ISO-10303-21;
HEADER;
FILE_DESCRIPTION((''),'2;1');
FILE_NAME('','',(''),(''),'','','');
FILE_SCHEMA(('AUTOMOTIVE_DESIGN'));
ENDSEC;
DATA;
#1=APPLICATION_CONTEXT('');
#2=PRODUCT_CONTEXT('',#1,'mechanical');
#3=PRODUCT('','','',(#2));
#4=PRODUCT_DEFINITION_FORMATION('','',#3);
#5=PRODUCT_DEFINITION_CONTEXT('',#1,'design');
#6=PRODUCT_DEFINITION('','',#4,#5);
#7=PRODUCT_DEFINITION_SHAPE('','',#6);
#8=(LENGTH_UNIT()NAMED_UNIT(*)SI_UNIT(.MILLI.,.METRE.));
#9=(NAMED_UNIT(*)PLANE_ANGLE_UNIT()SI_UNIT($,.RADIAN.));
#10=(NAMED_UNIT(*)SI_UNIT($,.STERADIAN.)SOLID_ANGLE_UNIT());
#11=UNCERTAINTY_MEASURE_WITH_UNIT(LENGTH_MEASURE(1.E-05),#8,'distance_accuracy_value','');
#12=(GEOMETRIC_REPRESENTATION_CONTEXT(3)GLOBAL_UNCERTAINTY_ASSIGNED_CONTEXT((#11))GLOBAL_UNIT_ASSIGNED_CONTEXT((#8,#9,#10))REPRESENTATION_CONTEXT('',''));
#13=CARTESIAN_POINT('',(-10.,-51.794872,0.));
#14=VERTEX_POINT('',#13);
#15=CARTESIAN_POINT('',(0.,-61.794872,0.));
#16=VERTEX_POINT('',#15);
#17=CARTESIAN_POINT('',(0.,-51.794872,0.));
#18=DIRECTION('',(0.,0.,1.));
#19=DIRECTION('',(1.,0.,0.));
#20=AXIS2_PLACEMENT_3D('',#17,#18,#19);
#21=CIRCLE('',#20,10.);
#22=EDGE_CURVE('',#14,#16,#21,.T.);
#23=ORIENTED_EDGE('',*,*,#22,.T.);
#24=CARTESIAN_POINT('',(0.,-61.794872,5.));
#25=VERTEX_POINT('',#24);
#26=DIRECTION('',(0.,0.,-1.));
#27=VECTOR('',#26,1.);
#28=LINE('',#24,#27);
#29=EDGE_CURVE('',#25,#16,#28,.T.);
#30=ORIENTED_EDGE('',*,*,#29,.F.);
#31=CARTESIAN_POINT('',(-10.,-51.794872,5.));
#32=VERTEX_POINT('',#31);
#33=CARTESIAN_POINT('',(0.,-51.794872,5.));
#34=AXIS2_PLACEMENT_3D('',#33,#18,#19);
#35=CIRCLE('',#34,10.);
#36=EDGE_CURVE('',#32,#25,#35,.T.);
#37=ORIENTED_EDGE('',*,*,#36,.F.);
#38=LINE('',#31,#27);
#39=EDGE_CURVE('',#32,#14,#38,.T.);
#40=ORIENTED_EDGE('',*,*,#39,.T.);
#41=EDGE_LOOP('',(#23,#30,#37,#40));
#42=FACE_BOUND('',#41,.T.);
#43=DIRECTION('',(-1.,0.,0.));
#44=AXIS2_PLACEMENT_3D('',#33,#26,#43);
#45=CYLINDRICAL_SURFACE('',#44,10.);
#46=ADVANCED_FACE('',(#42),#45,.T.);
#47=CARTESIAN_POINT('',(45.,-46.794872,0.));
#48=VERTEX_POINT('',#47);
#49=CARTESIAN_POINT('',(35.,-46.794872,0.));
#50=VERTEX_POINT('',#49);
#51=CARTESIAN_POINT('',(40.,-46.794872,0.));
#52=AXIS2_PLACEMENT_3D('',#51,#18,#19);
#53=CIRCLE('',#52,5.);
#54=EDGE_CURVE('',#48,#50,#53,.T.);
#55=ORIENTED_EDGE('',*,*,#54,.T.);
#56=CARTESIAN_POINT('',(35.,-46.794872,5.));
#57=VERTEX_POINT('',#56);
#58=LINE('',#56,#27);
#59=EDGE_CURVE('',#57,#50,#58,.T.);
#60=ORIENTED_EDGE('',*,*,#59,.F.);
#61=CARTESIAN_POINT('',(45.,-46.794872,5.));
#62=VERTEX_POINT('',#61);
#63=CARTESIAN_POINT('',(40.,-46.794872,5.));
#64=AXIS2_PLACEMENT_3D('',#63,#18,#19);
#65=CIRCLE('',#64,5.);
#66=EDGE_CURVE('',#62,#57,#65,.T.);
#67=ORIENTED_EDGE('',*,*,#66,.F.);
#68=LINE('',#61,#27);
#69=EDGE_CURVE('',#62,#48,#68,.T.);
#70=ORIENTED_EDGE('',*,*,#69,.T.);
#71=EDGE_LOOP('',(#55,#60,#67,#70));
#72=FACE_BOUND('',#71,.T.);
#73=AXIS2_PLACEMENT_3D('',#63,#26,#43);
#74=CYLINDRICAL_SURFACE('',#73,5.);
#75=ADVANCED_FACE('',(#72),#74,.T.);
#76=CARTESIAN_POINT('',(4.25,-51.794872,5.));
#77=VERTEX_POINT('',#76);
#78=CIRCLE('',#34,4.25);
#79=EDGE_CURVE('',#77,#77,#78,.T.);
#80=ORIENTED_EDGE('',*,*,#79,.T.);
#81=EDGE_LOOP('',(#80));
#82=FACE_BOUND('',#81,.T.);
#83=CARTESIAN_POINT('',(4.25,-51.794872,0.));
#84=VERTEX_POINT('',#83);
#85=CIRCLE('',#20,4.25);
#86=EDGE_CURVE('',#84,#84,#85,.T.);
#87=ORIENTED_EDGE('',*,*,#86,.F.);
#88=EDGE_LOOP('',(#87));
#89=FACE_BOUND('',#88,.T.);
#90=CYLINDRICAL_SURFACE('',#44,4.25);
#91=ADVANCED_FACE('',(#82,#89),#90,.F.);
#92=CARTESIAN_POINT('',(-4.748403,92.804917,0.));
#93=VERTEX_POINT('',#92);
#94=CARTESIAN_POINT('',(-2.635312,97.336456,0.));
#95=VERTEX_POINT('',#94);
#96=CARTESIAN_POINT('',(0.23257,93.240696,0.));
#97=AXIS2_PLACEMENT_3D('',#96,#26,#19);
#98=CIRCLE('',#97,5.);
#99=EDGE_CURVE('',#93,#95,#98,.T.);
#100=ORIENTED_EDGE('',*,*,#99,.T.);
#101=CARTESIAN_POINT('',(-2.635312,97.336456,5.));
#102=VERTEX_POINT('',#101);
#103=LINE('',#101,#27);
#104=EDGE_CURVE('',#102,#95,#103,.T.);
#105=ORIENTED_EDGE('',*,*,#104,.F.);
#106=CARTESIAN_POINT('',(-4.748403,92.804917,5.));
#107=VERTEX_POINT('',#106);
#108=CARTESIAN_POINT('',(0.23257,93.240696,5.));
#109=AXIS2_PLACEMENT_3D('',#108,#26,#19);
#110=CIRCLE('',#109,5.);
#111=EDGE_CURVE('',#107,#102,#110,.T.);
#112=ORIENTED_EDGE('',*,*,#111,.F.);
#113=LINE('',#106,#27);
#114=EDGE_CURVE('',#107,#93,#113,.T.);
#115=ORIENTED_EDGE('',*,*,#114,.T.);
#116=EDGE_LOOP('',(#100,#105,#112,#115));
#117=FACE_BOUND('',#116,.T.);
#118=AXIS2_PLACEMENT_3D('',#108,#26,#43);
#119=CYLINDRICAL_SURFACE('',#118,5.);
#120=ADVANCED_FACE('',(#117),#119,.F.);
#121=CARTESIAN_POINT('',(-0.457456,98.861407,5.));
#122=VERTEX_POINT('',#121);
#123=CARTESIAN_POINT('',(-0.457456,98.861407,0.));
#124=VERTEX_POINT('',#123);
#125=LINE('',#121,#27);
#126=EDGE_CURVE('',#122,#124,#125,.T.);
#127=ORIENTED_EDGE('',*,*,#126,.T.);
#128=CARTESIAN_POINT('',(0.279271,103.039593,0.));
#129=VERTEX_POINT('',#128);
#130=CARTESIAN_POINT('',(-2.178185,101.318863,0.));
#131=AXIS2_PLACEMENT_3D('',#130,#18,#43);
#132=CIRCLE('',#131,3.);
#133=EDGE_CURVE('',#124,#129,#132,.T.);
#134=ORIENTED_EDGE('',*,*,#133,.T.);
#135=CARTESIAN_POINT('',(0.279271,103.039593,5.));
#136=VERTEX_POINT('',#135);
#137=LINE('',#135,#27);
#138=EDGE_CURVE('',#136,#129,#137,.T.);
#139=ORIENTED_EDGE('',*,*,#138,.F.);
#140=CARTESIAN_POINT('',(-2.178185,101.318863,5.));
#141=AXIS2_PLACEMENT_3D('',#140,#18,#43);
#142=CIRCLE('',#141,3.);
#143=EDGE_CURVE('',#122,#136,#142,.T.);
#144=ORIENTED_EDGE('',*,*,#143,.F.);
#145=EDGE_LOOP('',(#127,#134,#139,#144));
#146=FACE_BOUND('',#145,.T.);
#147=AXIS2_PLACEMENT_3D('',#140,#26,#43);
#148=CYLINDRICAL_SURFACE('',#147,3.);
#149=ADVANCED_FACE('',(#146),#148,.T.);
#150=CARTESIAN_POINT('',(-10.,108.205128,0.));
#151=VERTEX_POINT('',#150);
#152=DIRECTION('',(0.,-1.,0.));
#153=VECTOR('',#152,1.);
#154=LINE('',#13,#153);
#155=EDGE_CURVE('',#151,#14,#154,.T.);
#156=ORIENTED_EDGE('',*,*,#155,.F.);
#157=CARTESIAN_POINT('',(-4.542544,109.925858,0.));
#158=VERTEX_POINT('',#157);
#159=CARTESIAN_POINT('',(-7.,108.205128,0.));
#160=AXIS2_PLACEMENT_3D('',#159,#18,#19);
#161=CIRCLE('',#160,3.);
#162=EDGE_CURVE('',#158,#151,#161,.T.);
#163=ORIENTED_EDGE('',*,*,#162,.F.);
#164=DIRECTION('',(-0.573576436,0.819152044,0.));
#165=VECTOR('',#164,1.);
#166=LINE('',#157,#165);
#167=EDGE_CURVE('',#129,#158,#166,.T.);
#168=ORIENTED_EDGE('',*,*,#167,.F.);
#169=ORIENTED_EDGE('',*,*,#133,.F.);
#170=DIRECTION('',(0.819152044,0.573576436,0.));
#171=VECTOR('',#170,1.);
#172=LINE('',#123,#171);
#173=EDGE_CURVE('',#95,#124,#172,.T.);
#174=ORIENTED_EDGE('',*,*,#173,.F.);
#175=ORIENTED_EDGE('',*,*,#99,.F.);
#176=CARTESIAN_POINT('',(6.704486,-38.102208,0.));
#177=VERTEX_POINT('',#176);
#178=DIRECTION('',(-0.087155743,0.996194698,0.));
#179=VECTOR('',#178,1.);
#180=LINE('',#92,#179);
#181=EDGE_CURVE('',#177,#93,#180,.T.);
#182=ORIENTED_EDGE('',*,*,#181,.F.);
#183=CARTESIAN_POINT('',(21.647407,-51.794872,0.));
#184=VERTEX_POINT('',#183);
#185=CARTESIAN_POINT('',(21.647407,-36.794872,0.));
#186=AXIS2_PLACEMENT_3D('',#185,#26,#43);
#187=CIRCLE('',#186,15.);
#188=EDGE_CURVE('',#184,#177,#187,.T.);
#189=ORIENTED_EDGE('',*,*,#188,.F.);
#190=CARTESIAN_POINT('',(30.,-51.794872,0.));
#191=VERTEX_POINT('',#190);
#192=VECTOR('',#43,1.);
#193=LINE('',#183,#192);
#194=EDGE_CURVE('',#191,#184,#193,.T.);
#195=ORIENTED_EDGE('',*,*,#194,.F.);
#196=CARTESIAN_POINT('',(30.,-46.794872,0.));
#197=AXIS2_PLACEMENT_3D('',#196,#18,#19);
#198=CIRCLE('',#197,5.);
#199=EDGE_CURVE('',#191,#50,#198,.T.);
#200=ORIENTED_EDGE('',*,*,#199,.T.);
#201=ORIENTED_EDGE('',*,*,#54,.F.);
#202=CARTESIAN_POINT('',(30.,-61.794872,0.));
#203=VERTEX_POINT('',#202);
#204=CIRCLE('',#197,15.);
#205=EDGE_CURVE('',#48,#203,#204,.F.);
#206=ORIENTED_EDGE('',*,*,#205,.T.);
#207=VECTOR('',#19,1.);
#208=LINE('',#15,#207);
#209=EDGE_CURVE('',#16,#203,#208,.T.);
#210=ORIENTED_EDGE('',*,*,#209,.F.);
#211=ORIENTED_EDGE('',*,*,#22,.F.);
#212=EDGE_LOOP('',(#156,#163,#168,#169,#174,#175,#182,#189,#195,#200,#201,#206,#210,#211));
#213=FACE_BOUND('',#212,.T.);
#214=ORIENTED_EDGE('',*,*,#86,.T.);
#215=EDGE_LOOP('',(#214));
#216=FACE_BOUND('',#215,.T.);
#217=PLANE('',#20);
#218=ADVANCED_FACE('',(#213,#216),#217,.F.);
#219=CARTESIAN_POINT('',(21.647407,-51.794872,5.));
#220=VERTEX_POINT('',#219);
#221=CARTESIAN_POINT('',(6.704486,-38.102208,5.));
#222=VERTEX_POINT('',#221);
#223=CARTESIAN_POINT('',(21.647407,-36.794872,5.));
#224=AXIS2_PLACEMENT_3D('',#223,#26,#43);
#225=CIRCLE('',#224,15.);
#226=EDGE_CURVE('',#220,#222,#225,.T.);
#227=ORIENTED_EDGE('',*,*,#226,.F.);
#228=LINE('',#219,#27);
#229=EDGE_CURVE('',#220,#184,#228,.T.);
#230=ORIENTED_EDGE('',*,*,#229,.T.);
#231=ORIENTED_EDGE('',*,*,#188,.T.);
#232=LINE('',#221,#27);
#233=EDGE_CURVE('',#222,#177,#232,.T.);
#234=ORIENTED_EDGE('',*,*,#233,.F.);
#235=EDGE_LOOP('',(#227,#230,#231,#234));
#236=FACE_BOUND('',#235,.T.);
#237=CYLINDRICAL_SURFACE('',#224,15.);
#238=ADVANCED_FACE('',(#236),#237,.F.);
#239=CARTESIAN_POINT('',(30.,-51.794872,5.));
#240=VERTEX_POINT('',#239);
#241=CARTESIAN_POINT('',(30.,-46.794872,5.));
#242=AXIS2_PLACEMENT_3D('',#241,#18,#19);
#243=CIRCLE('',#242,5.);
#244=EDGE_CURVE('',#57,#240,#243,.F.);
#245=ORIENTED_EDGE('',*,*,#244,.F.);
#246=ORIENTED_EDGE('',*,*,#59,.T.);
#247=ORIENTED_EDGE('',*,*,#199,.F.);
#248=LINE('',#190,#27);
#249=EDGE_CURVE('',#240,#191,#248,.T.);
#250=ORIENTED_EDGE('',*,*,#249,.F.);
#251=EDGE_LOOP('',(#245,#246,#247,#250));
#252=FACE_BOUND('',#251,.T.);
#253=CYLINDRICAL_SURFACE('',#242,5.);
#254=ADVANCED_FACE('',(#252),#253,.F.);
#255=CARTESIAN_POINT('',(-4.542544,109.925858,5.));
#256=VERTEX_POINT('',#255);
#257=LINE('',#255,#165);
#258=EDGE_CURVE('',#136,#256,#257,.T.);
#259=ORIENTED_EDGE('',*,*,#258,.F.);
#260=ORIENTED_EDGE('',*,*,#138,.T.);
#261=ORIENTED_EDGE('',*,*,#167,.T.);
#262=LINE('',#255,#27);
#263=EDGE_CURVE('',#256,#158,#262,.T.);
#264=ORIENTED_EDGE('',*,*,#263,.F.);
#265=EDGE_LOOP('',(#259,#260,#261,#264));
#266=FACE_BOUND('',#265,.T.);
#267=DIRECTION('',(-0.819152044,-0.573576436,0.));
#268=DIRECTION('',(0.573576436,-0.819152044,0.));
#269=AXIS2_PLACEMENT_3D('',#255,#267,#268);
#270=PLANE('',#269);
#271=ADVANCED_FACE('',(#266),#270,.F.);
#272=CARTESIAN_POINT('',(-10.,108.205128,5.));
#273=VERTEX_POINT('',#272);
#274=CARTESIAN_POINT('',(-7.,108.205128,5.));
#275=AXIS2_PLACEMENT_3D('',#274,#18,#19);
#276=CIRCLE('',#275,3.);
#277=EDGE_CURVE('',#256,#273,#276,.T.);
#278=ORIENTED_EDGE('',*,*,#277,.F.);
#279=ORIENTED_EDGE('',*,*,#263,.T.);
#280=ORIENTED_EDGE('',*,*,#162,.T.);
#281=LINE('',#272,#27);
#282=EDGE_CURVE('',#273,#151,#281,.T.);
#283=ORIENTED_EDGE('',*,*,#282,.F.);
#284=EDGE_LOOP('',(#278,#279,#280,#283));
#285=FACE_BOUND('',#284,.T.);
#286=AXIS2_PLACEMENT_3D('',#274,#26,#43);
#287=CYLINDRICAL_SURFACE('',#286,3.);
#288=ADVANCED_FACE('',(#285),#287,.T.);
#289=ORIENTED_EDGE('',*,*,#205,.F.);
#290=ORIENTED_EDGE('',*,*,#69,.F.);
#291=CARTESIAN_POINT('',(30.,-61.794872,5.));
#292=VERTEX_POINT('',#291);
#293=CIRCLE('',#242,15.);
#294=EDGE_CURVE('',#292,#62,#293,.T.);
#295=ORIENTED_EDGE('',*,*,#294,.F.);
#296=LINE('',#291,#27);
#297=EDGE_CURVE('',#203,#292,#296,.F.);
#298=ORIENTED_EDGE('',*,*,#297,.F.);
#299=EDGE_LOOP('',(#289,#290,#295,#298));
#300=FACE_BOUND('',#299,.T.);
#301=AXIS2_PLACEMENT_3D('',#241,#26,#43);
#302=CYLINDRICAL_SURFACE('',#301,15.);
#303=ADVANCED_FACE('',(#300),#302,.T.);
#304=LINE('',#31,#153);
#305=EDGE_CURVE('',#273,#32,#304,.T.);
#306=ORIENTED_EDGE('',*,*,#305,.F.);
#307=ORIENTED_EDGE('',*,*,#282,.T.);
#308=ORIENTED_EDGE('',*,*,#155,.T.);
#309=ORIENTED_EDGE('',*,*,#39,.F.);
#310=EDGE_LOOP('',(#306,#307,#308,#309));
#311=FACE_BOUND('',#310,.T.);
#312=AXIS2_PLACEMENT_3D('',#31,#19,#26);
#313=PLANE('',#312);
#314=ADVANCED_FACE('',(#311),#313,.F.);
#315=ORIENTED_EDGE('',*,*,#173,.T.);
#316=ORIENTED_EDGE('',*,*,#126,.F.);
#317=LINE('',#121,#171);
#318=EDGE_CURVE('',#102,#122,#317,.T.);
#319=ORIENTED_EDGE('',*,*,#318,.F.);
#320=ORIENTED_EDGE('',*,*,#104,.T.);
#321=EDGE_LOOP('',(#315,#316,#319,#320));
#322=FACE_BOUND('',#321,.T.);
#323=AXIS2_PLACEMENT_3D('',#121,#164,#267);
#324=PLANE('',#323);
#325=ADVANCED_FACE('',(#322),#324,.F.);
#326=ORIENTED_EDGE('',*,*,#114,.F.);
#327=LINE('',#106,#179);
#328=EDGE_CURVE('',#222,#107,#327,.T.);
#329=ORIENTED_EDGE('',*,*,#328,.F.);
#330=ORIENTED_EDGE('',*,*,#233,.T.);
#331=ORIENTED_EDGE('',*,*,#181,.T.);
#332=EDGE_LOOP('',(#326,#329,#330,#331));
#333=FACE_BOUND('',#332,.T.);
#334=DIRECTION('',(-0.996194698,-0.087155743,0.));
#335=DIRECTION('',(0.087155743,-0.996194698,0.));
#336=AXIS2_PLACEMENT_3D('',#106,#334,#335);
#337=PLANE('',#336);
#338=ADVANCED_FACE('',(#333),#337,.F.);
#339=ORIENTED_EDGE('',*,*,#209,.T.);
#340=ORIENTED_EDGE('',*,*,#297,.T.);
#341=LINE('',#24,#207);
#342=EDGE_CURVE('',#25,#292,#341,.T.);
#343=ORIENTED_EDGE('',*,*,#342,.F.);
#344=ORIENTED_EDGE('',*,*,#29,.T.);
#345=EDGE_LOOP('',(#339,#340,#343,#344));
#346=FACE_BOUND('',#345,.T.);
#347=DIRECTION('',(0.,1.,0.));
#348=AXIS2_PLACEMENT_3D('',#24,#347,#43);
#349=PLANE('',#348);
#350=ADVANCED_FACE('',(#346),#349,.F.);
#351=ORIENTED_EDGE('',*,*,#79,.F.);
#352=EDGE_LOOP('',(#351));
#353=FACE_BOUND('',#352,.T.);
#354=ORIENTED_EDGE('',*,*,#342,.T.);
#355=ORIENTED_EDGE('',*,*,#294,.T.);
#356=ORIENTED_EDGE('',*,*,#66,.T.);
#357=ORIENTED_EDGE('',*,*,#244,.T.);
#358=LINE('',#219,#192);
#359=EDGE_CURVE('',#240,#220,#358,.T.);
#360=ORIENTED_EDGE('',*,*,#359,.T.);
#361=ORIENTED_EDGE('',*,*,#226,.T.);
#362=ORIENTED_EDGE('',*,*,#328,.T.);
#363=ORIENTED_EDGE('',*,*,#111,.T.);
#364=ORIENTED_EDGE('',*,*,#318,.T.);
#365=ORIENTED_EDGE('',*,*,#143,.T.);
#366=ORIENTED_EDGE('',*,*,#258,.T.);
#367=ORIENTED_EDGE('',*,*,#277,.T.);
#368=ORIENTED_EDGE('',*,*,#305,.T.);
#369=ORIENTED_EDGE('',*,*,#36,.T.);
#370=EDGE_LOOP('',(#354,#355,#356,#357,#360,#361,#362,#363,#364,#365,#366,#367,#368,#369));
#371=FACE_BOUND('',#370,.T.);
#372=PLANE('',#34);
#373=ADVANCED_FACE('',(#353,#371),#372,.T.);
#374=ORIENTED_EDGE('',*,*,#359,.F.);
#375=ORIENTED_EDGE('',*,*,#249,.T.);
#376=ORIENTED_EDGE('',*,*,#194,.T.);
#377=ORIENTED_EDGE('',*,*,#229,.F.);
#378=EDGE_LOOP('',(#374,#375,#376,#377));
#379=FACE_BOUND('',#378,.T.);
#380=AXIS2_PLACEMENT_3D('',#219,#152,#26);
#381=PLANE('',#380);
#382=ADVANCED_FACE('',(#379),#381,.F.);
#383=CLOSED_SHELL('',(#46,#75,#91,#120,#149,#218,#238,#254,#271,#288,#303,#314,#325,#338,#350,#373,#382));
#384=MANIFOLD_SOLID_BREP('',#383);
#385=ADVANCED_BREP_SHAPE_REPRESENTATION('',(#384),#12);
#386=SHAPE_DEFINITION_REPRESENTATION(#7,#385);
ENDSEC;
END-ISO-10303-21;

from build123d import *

# Parameters (mm, degrees)
SKETCH_1_R      = 4.25
EXTRUDE_1_DEPTH = 5
FILLET_1_R      = 5
FILLET_2_R      = 15


with BuildPart() as part:
    # Эскиз1 → Бобышка-Вытянуть1 (new body)
    with BuildSketch(Plane.XY):
        with BuildLine():
            Line((-10, -51.794871795), (-10, 108.205128205))
            ThreePointArc((-10, 108.205128205), (-7.902117399, 111.066279057), (-4.542543867, 109.925857514))
            Line((-4.542543867, 109.925857514), (0.279270691, 103.039592664))
            ThreePointArc((0.279270691, 103.039592664), (0.776237817, 100.797918822), (-0.457456133, 98.861407222))
            Line((-0.457456133, 98.861407222), (-2.635311734, 97.336456313))
            ThreePointArc((-2.635311734, 97.336456313), (-4.298968487, 95.353787401), (-4.748403042, 92.804917378))
            Line((-4.748403042, 92.804917378), (6.704486397, -38.102207936))
            ThreePointArc((6.704486397, -38.102207936), (11.513553755, -47.854031847), (21.647406869, -51.794871795))
            Line((21.647406869, -51.794871795), (35, -51.794871795))
            Line((35, -51.794871795), (35, -46.794871795))
            ThreePointArc((35, -46.794871795), (40, -41.794871795), (45, -46.794871795))
            Line((45, -46.794871795), (45, -61.794871795))
            Line((45, -61.794871795), (0, -61.794871795))
            ThreePointArc((0, -61.794871795), (-7.071067812, -58.865939607), (-10, -51.794871795))
        make_face()
        with Locations((0, -51.794871795)):
            Circle(SKETCH_1_R, mode=Mode.SUBTRACT)
    extrude(amount=EXTRUDE_1_DEPTH)

    # Скругление1
    fillet_1_edges = [part.edges().sort_by_distance(p)[0] for p in [
        (35, -51.794871795, 2.5),
    ]]
    fillet(fillet_1_edges, radius=FILLET_1_R - 0.0001)  # a hair under: the kernel refuses the full size

    # Скругление2
    fillet_2_edges = [part.edges().sort_by_distance(p)[0] for p in [
        (45, -61.794871795, 2.5),
    ]]
    fillet(fillet_2_edges, radius=FILLET_2_R - 0.0001)  # a hair under: the kernel refuses the full size


solid = part.part
